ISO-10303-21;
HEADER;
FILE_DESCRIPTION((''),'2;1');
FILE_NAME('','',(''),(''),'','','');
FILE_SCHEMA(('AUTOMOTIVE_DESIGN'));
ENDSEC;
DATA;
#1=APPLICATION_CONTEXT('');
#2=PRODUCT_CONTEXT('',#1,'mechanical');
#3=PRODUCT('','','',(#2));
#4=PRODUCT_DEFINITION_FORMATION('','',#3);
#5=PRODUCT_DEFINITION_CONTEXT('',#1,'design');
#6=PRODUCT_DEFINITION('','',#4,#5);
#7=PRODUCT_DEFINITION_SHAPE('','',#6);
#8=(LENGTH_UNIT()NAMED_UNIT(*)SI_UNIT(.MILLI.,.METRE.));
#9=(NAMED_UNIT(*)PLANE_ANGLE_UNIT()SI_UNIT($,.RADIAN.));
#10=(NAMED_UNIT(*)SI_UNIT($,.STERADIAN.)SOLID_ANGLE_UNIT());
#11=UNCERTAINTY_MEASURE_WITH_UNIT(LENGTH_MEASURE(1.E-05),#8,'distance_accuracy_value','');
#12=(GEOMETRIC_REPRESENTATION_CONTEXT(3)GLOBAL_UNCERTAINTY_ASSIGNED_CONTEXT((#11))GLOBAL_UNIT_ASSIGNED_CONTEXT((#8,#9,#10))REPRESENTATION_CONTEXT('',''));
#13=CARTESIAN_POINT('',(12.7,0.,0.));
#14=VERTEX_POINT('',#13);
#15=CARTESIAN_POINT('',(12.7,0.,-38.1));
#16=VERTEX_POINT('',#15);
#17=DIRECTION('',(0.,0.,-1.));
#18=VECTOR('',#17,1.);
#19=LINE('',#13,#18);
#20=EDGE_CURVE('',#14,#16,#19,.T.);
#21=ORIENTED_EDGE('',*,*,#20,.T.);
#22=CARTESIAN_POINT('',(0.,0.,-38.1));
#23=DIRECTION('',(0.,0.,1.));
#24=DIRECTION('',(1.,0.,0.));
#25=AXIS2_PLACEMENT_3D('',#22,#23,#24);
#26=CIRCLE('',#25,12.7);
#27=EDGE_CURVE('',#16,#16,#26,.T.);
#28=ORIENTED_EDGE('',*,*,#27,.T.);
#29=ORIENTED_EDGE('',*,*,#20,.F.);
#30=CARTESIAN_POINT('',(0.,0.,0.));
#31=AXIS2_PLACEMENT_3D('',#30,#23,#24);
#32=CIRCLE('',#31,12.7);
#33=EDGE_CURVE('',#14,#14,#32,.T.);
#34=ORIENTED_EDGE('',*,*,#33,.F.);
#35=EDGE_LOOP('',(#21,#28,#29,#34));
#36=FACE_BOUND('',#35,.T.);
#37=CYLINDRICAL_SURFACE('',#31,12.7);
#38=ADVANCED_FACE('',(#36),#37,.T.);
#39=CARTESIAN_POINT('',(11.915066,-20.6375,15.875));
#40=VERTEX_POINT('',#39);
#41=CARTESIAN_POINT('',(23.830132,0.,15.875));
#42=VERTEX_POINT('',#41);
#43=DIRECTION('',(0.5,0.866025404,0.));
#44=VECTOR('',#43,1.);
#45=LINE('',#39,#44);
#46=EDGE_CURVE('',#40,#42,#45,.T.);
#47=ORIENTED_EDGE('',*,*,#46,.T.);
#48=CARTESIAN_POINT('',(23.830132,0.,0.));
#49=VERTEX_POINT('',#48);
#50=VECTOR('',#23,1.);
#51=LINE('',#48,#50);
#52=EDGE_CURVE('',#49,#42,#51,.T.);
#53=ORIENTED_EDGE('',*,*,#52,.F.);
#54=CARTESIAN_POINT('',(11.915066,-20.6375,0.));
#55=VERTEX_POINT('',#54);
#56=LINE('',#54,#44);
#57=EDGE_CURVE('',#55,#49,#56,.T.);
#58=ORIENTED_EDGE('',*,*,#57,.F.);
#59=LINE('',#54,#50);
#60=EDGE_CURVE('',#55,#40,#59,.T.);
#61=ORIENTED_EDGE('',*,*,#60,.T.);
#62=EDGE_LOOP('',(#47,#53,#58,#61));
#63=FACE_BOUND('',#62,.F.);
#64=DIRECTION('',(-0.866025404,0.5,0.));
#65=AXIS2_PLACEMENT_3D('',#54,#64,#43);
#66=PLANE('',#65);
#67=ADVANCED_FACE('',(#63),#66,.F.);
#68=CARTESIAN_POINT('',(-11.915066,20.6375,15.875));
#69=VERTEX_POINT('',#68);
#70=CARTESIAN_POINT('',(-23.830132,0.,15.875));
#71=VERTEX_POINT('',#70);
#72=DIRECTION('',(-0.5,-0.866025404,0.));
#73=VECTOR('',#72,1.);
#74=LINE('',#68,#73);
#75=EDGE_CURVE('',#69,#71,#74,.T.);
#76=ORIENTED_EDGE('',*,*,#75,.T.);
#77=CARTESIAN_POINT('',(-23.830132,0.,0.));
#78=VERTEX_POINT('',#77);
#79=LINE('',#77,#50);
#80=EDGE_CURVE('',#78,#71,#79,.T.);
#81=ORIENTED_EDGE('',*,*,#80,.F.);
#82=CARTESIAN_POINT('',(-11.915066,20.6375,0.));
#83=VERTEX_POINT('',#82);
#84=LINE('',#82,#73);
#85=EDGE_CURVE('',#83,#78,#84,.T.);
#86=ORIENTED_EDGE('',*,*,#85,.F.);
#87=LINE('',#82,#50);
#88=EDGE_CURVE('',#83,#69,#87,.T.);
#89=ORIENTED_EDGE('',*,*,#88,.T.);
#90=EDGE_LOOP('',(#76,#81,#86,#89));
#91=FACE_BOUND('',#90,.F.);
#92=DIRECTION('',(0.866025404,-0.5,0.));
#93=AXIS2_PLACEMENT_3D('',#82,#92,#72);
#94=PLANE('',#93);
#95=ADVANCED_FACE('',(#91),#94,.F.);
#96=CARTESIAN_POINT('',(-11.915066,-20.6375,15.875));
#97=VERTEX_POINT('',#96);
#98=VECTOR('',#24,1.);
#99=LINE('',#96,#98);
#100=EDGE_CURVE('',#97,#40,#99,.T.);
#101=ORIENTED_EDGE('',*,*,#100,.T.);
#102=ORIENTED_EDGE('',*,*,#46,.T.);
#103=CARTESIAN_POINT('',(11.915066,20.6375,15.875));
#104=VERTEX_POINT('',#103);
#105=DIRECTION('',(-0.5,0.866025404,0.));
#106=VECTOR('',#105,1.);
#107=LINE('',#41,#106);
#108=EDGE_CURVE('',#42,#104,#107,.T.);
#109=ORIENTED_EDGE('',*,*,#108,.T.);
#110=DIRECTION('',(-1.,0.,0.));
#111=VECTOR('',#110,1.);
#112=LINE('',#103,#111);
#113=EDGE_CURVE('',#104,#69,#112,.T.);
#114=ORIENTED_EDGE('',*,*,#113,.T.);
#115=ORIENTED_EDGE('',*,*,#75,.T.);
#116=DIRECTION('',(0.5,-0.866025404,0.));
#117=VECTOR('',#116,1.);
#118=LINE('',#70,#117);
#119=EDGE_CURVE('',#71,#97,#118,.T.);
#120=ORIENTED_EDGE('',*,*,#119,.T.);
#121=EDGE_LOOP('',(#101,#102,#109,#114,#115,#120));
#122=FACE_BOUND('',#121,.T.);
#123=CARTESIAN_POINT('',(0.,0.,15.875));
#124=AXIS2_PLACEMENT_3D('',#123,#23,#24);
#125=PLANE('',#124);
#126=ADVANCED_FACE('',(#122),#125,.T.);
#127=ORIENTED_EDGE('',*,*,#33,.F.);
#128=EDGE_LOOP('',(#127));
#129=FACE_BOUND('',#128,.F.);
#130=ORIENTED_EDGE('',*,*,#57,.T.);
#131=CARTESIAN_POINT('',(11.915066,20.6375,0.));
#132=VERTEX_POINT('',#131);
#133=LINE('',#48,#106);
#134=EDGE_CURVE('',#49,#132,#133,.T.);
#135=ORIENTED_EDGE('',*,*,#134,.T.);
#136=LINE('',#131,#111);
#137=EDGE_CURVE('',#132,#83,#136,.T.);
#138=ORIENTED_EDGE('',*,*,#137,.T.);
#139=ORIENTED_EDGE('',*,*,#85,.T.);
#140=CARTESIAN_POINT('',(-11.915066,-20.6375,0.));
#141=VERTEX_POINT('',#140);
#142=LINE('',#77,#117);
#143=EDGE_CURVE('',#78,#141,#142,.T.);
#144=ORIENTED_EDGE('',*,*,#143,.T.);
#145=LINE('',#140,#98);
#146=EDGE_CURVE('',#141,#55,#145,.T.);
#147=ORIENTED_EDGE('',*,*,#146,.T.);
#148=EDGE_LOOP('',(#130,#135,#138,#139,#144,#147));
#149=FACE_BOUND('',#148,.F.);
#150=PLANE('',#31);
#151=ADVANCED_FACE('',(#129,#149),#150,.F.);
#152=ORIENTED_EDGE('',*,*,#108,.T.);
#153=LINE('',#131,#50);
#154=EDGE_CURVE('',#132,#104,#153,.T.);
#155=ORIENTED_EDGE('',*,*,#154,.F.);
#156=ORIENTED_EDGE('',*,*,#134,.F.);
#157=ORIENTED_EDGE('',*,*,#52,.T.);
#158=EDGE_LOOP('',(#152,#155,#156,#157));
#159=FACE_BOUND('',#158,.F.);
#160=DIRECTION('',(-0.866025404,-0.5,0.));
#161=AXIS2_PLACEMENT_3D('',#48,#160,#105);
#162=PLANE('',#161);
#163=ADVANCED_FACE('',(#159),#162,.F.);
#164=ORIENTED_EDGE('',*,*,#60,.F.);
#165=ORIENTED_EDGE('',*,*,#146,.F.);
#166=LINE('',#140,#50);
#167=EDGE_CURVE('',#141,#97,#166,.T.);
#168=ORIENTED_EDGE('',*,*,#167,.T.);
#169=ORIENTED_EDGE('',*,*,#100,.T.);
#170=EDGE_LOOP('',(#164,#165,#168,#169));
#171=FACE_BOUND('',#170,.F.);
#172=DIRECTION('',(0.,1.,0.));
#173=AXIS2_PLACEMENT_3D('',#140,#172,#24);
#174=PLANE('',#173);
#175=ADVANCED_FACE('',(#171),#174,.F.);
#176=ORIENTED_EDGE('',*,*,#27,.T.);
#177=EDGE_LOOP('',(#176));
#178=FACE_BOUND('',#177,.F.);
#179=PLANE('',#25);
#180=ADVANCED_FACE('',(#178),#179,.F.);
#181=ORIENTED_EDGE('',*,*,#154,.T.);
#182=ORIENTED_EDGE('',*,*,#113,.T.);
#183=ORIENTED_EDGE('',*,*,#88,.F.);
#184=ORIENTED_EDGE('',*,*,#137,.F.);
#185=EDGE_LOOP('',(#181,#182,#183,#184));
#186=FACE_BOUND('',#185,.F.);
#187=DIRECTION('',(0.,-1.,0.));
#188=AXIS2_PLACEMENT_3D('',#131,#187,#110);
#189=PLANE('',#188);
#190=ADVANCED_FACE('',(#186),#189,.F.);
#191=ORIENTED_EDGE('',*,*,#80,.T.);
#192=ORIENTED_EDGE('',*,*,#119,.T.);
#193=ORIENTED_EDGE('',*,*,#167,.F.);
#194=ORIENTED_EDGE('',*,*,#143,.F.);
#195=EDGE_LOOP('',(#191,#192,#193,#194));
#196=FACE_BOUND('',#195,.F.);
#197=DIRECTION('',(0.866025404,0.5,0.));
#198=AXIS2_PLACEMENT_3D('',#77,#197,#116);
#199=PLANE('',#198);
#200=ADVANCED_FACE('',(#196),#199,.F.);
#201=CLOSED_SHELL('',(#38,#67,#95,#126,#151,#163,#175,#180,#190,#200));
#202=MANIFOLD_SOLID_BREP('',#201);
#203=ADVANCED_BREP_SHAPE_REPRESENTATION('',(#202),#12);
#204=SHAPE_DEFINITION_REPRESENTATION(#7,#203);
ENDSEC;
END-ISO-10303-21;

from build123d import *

# Parameters (mm, degrees)
F0_R     = 12.7
F1_DEPTH = 38.1
F3_DEPTH = 15.875


# Not quite as in the source:
# - a feature names something its author has since deleted; it is built from what else it names


with BuildPart() as f1:
    # F0 (on Top) → F1 (new body)
    with BuildSketch(Plane.XY):
        Circle(F0_R)
    extrude(amount=-F1_DEPTH)

    # F2 (on face) → F3 (join)
    with BuildSketch(Plane.XY):
        Polygon((11.9150661804, 20.6375), (-11.9150661804, 20.6375), (-23.8301323608, 0), (-11.9150661804, -20.6375), (11.9150661804, -20.6375), (23.8301323608, 0), align=None)
    extrude(amount=F3_DEPTH)


solid = f1.part
